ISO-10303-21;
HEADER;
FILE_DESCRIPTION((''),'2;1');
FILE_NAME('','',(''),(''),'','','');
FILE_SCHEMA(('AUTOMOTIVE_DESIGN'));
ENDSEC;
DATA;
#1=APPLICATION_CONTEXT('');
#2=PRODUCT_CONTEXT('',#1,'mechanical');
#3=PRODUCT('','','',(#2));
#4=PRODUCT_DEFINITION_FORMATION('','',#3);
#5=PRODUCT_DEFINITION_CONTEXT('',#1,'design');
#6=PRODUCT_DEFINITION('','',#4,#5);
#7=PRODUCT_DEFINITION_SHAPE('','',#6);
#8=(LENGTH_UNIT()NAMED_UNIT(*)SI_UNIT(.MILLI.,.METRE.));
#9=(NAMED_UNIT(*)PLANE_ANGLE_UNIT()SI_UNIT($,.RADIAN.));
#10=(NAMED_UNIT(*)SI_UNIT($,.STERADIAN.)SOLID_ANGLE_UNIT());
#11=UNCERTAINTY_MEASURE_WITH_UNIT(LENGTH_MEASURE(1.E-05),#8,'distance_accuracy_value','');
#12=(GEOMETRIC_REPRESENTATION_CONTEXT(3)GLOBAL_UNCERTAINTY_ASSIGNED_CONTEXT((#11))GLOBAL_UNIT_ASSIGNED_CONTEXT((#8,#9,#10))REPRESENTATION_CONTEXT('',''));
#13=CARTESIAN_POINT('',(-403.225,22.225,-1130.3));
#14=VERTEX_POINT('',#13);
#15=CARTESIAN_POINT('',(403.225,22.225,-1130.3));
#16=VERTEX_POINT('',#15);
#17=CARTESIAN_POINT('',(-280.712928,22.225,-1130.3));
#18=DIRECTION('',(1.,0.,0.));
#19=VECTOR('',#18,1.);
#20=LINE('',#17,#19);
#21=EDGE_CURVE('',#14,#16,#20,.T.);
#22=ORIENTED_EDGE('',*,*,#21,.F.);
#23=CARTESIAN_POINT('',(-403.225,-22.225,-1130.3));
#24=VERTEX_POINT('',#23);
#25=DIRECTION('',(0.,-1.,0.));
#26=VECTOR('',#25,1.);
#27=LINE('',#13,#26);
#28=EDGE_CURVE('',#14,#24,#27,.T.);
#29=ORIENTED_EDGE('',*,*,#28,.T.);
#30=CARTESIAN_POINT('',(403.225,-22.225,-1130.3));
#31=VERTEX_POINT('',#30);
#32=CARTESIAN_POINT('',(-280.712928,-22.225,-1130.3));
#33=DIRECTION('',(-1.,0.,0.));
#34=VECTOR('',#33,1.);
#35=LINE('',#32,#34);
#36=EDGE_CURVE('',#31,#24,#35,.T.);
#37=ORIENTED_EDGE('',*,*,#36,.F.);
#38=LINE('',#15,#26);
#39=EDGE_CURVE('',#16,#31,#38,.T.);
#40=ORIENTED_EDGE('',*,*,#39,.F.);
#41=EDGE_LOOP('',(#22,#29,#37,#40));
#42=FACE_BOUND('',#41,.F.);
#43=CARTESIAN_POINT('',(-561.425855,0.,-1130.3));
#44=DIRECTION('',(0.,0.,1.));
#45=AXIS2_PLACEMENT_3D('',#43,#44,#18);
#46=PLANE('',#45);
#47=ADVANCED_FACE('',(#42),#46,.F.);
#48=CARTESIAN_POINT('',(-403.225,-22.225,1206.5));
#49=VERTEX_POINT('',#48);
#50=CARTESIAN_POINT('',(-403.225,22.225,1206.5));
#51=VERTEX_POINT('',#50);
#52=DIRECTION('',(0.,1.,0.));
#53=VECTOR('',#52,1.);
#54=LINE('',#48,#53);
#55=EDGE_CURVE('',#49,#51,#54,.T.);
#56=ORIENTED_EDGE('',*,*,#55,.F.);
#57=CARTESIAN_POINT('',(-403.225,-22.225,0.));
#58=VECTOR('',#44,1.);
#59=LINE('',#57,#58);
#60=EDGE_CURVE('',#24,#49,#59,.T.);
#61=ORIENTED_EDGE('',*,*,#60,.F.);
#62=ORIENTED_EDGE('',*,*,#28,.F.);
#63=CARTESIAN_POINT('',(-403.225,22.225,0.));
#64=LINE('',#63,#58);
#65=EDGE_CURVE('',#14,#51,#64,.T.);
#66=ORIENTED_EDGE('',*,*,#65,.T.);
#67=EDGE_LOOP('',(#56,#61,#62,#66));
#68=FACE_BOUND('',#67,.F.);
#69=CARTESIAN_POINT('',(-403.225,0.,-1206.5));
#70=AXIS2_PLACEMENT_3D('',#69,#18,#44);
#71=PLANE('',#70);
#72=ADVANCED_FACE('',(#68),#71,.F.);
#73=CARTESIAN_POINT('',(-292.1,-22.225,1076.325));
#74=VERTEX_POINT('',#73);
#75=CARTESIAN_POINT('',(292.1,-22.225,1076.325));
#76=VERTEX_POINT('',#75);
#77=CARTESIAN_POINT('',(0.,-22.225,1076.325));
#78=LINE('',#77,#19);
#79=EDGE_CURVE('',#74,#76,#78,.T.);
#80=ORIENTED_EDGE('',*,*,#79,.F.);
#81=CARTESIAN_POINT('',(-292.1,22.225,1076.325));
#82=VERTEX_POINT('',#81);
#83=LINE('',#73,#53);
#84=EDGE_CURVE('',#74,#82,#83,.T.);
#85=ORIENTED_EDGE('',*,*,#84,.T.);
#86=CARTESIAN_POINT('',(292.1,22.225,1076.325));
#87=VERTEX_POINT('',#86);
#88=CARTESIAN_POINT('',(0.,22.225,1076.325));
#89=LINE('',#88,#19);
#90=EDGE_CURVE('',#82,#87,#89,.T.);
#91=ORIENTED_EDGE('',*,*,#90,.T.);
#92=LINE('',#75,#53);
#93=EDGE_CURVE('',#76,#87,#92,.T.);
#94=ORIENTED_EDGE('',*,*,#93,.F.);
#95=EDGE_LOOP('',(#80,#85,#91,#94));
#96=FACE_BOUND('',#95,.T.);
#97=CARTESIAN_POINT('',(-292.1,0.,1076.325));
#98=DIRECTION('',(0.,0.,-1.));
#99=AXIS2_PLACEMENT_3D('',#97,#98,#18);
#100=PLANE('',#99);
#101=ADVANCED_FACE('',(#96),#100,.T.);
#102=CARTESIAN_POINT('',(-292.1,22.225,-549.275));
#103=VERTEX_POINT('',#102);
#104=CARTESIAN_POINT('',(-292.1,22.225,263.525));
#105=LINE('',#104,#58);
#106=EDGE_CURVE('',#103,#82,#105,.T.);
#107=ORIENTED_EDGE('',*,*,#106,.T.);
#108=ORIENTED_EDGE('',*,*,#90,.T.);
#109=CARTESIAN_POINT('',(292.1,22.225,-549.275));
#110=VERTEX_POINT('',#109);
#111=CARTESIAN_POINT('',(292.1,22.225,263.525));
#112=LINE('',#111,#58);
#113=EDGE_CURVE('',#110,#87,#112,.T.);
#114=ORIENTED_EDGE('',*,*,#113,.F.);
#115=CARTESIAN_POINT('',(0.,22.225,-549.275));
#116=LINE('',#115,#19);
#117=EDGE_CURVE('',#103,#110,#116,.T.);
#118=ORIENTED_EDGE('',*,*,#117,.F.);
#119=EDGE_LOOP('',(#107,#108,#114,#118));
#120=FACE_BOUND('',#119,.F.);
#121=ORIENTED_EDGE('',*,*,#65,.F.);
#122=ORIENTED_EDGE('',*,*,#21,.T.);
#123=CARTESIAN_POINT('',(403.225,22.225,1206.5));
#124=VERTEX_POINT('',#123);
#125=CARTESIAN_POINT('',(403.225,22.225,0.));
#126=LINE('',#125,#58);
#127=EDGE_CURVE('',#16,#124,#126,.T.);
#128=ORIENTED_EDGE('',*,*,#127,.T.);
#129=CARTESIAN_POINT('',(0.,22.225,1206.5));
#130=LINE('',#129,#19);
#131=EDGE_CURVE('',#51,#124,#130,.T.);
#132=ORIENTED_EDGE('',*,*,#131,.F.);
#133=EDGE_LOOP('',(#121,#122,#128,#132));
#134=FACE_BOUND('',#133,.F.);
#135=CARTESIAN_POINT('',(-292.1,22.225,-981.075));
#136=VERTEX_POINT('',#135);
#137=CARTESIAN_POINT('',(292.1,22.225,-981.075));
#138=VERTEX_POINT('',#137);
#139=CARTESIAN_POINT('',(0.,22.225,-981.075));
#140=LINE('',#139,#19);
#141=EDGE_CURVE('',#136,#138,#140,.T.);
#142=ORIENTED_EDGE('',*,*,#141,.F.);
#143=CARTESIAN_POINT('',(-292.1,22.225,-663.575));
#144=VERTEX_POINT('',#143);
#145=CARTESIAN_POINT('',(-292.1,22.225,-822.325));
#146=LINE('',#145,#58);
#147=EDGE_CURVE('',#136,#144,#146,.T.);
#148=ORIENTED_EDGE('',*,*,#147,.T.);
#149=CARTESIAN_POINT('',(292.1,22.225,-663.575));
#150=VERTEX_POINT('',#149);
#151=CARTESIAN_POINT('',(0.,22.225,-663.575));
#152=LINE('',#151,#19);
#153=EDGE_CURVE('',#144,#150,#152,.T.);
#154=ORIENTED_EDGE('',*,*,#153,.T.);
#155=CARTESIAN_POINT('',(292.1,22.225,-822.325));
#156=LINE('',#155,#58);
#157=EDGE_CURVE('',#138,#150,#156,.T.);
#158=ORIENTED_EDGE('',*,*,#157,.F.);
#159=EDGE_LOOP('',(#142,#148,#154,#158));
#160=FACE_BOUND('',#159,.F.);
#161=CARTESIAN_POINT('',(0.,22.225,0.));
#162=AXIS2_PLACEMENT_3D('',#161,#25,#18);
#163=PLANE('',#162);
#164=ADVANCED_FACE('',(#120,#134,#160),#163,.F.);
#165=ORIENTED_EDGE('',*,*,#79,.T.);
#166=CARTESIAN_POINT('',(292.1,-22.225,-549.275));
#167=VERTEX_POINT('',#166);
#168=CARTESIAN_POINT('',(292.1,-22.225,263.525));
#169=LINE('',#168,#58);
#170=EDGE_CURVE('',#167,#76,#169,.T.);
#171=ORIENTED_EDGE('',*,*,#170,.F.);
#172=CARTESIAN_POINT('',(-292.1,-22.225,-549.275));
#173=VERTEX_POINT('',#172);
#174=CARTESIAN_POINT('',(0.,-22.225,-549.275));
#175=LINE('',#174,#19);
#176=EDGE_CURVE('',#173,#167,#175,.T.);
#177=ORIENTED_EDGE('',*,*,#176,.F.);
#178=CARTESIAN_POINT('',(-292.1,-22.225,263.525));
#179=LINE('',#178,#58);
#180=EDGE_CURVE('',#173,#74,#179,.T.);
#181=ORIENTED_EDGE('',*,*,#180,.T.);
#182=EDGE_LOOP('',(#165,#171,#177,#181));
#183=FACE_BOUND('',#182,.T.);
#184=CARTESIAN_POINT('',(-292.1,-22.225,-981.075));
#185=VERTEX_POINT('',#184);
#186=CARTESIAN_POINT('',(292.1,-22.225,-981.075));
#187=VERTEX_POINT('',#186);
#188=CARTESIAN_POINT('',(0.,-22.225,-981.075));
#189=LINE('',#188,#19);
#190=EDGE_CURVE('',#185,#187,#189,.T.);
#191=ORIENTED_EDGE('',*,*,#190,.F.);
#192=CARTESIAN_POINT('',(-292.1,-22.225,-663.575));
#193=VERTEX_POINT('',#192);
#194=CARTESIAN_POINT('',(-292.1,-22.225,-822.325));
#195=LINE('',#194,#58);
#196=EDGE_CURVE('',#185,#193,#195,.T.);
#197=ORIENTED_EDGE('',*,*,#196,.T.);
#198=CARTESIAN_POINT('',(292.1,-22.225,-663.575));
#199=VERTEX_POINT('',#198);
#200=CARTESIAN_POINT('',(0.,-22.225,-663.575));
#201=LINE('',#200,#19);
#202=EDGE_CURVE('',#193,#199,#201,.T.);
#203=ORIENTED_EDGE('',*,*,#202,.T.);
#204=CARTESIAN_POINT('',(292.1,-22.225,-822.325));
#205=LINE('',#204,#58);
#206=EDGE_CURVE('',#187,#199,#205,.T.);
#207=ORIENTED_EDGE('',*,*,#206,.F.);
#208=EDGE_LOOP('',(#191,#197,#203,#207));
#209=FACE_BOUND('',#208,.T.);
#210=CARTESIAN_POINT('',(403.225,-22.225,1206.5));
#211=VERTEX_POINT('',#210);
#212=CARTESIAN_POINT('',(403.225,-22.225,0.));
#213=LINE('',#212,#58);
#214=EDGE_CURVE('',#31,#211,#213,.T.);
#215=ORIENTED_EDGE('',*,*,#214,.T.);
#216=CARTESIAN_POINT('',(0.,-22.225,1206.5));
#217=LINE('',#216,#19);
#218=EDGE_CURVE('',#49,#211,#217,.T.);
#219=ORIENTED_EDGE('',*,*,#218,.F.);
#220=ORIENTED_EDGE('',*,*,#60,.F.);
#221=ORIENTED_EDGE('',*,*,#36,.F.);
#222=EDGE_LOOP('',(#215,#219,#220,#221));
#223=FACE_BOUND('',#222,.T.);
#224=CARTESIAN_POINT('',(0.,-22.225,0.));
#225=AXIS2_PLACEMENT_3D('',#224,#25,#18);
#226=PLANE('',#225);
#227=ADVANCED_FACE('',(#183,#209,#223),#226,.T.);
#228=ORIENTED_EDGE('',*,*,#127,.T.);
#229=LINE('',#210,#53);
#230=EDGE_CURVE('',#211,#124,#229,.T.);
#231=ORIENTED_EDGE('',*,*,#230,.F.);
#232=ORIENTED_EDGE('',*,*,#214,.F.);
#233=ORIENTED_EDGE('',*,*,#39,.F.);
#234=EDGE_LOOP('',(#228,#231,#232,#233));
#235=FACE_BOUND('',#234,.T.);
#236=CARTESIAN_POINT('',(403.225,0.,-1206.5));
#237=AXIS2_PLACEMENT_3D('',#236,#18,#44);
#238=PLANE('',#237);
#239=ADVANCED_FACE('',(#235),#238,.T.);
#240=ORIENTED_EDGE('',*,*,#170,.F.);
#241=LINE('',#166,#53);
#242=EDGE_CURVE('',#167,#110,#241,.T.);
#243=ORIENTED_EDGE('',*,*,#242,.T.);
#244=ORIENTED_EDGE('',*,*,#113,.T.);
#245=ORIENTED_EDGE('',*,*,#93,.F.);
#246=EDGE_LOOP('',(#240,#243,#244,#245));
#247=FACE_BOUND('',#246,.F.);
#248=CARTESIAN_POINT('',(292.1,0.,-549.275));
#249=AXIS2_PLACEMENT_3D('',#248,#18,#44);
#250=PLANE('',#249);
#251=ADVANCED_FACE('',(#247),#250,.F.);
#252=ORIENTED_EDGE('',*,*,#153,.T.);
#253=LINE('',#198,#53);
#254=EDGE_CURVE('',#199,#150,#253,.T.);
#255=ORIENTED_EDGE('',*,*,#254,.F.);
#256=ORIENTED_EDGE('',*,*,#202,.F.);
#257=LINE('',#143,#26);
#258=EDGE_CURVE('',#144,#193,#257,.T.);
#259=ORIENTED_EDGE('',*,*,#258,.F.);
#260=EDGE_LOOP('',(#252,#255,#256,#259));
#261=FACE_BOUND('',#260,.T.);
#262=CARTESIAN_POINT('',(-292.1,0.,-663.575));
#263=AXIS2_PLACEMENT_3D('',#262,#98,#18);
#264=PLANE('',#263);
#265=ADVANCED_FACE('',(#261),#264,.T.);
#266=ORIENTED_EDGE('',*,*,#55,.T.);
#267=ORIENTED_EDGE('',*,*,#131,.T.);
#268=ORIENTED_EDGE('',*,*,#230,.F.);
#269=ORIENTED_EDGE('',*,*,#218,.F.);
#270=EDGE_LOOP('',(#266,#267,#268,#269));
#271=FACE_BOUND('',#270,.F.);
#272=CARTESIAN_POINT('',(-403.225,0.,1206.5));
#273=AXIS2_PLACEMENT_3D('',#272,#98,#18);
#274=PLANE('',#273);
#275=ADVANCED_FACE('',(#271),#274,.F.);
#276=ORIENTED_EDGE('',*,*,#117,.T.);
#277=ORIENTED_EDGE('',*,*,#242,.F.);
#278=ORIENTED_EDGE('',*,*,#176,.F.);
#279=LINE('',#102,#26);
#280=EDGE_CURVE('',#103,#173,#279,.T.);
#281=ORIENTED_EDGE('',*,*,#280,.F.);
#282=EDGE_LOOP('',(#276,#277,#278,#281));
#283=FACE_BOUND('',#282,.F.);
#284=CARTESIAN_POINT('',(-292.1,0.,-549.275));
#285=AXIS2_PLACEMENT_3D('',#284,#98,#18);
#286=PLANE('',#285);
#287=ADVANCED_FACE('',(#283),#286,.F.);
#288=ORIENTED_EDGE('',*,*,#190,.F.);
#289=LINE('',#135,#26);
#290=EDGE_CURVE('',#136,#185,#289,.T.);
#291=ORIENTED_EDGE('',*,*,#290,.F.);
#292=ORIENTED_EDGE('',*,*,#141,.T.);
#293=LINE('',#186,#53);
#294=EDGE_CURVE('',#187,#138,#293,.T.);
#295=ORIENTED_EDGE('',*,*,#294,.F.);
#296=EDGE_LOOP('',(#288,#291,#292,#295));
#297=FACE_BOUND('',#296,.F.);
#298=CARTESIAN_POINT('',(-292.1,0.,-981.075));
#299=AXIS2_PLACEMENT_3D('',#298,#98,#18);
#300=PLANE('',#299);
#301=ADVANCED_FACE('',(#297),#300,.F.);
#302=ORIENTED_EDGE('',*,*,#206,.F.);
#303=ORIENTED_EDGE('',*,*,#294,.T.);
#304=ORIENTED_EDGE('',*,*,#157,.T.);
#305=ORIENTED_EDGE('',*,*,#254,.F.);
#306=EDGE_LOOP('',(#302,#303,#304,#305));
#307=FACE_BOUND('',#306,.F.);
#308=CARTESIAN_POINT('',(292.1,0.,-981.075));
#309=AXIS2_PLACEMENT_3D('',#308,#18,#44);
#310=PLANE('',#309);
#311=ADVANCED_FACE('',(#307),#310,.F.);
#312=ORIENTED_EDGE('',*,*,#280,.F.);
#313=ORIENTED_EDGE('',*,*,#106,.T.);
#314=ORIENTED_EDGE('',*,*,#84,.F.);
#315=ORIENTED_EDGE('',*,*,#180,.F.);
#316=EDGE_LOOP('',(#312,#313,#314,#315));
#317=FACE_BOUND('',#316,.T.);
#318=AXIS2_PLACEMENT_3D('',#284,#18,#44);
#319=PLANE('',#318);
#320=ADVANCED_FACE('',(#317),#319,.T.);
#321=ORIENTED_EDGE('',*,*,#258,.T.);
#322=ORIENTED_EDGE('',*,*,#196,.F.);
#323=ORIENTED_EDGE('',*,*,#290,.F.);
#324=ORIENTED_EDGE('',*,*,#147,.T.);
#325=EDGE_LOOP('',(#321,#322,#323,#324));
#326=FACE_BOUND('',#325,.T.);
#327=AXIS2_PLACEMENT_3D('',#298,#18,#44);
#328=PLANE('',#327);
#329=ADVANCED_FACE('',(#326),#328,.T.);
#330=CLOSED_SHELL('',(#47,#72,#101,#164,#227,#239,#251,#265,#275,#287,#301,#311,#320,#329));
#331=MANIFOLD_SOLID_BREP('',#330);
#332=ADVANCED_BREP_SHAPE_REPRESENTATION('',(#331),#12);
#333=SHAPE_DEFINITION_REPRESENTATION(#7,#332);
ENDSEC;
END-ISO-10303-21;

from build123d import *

# Parameters (mm, degrees)
F0_W          = 806.45
F0_H          = 2413
F0_W_2        = 584.2
F0_H_2        = 317.5
F0_H_3        = 1625.6
F1_DEPTH      = 22.225
F1_DEPTH_BACK = 22.225
F2_W          = 1248.5843106929
F2_H          = 271.0993243682
F2_H_2        = 504.0157202398
F3_DEPTH      = 22.226
F3_DEPTH_BACK = 22.226


# Not quite as in the source:
# - a length typed as a fraction of an inch, garbled in the dataset ("3 / 203.2 mm" for 3/8 in), is restored


with BuildPart() as f1:
    # F0 (on Front) → F1 (new body, two sides)
    with BuildSketch(Plane.XZ) as f1_sk:
        Rectangle(F0_W, F0_H)
        with Locations((0, -822.325)):
            Rectangle(F0_W_2, F0_H_2, mode=Mode.SUBTRACT)
        with Locations((0, 263.525)):
            Rectangle(F0_W_2, F0_H_3, mode=Mode.SUBTRACT)
    extrude(amount=F1_DEPTH)
    extrude(f1_sk.sketch, amount=-F1_DEPTH_BACK)

    # F2 (on Front) → F3 (cut, two sides)
    with BuildSketch(Plane.XZ) as f3_sk:
        with Locations((62.8663003445, 1342.0496621841)):
            Rectangle(F2_W, F2_H)
        with Locations((62.8663003445, -1382.3078601199)):
            Rectangle(F2_W, F2_H_2)
    extrude(amount=-F3_DEPTH, mode=Mode.SUBTRACT)
    extrude(f3_sk.sketch, amount=F3_DEPTH_BACK, mode=Mode.SUBTRACT)


solid = f1.part
